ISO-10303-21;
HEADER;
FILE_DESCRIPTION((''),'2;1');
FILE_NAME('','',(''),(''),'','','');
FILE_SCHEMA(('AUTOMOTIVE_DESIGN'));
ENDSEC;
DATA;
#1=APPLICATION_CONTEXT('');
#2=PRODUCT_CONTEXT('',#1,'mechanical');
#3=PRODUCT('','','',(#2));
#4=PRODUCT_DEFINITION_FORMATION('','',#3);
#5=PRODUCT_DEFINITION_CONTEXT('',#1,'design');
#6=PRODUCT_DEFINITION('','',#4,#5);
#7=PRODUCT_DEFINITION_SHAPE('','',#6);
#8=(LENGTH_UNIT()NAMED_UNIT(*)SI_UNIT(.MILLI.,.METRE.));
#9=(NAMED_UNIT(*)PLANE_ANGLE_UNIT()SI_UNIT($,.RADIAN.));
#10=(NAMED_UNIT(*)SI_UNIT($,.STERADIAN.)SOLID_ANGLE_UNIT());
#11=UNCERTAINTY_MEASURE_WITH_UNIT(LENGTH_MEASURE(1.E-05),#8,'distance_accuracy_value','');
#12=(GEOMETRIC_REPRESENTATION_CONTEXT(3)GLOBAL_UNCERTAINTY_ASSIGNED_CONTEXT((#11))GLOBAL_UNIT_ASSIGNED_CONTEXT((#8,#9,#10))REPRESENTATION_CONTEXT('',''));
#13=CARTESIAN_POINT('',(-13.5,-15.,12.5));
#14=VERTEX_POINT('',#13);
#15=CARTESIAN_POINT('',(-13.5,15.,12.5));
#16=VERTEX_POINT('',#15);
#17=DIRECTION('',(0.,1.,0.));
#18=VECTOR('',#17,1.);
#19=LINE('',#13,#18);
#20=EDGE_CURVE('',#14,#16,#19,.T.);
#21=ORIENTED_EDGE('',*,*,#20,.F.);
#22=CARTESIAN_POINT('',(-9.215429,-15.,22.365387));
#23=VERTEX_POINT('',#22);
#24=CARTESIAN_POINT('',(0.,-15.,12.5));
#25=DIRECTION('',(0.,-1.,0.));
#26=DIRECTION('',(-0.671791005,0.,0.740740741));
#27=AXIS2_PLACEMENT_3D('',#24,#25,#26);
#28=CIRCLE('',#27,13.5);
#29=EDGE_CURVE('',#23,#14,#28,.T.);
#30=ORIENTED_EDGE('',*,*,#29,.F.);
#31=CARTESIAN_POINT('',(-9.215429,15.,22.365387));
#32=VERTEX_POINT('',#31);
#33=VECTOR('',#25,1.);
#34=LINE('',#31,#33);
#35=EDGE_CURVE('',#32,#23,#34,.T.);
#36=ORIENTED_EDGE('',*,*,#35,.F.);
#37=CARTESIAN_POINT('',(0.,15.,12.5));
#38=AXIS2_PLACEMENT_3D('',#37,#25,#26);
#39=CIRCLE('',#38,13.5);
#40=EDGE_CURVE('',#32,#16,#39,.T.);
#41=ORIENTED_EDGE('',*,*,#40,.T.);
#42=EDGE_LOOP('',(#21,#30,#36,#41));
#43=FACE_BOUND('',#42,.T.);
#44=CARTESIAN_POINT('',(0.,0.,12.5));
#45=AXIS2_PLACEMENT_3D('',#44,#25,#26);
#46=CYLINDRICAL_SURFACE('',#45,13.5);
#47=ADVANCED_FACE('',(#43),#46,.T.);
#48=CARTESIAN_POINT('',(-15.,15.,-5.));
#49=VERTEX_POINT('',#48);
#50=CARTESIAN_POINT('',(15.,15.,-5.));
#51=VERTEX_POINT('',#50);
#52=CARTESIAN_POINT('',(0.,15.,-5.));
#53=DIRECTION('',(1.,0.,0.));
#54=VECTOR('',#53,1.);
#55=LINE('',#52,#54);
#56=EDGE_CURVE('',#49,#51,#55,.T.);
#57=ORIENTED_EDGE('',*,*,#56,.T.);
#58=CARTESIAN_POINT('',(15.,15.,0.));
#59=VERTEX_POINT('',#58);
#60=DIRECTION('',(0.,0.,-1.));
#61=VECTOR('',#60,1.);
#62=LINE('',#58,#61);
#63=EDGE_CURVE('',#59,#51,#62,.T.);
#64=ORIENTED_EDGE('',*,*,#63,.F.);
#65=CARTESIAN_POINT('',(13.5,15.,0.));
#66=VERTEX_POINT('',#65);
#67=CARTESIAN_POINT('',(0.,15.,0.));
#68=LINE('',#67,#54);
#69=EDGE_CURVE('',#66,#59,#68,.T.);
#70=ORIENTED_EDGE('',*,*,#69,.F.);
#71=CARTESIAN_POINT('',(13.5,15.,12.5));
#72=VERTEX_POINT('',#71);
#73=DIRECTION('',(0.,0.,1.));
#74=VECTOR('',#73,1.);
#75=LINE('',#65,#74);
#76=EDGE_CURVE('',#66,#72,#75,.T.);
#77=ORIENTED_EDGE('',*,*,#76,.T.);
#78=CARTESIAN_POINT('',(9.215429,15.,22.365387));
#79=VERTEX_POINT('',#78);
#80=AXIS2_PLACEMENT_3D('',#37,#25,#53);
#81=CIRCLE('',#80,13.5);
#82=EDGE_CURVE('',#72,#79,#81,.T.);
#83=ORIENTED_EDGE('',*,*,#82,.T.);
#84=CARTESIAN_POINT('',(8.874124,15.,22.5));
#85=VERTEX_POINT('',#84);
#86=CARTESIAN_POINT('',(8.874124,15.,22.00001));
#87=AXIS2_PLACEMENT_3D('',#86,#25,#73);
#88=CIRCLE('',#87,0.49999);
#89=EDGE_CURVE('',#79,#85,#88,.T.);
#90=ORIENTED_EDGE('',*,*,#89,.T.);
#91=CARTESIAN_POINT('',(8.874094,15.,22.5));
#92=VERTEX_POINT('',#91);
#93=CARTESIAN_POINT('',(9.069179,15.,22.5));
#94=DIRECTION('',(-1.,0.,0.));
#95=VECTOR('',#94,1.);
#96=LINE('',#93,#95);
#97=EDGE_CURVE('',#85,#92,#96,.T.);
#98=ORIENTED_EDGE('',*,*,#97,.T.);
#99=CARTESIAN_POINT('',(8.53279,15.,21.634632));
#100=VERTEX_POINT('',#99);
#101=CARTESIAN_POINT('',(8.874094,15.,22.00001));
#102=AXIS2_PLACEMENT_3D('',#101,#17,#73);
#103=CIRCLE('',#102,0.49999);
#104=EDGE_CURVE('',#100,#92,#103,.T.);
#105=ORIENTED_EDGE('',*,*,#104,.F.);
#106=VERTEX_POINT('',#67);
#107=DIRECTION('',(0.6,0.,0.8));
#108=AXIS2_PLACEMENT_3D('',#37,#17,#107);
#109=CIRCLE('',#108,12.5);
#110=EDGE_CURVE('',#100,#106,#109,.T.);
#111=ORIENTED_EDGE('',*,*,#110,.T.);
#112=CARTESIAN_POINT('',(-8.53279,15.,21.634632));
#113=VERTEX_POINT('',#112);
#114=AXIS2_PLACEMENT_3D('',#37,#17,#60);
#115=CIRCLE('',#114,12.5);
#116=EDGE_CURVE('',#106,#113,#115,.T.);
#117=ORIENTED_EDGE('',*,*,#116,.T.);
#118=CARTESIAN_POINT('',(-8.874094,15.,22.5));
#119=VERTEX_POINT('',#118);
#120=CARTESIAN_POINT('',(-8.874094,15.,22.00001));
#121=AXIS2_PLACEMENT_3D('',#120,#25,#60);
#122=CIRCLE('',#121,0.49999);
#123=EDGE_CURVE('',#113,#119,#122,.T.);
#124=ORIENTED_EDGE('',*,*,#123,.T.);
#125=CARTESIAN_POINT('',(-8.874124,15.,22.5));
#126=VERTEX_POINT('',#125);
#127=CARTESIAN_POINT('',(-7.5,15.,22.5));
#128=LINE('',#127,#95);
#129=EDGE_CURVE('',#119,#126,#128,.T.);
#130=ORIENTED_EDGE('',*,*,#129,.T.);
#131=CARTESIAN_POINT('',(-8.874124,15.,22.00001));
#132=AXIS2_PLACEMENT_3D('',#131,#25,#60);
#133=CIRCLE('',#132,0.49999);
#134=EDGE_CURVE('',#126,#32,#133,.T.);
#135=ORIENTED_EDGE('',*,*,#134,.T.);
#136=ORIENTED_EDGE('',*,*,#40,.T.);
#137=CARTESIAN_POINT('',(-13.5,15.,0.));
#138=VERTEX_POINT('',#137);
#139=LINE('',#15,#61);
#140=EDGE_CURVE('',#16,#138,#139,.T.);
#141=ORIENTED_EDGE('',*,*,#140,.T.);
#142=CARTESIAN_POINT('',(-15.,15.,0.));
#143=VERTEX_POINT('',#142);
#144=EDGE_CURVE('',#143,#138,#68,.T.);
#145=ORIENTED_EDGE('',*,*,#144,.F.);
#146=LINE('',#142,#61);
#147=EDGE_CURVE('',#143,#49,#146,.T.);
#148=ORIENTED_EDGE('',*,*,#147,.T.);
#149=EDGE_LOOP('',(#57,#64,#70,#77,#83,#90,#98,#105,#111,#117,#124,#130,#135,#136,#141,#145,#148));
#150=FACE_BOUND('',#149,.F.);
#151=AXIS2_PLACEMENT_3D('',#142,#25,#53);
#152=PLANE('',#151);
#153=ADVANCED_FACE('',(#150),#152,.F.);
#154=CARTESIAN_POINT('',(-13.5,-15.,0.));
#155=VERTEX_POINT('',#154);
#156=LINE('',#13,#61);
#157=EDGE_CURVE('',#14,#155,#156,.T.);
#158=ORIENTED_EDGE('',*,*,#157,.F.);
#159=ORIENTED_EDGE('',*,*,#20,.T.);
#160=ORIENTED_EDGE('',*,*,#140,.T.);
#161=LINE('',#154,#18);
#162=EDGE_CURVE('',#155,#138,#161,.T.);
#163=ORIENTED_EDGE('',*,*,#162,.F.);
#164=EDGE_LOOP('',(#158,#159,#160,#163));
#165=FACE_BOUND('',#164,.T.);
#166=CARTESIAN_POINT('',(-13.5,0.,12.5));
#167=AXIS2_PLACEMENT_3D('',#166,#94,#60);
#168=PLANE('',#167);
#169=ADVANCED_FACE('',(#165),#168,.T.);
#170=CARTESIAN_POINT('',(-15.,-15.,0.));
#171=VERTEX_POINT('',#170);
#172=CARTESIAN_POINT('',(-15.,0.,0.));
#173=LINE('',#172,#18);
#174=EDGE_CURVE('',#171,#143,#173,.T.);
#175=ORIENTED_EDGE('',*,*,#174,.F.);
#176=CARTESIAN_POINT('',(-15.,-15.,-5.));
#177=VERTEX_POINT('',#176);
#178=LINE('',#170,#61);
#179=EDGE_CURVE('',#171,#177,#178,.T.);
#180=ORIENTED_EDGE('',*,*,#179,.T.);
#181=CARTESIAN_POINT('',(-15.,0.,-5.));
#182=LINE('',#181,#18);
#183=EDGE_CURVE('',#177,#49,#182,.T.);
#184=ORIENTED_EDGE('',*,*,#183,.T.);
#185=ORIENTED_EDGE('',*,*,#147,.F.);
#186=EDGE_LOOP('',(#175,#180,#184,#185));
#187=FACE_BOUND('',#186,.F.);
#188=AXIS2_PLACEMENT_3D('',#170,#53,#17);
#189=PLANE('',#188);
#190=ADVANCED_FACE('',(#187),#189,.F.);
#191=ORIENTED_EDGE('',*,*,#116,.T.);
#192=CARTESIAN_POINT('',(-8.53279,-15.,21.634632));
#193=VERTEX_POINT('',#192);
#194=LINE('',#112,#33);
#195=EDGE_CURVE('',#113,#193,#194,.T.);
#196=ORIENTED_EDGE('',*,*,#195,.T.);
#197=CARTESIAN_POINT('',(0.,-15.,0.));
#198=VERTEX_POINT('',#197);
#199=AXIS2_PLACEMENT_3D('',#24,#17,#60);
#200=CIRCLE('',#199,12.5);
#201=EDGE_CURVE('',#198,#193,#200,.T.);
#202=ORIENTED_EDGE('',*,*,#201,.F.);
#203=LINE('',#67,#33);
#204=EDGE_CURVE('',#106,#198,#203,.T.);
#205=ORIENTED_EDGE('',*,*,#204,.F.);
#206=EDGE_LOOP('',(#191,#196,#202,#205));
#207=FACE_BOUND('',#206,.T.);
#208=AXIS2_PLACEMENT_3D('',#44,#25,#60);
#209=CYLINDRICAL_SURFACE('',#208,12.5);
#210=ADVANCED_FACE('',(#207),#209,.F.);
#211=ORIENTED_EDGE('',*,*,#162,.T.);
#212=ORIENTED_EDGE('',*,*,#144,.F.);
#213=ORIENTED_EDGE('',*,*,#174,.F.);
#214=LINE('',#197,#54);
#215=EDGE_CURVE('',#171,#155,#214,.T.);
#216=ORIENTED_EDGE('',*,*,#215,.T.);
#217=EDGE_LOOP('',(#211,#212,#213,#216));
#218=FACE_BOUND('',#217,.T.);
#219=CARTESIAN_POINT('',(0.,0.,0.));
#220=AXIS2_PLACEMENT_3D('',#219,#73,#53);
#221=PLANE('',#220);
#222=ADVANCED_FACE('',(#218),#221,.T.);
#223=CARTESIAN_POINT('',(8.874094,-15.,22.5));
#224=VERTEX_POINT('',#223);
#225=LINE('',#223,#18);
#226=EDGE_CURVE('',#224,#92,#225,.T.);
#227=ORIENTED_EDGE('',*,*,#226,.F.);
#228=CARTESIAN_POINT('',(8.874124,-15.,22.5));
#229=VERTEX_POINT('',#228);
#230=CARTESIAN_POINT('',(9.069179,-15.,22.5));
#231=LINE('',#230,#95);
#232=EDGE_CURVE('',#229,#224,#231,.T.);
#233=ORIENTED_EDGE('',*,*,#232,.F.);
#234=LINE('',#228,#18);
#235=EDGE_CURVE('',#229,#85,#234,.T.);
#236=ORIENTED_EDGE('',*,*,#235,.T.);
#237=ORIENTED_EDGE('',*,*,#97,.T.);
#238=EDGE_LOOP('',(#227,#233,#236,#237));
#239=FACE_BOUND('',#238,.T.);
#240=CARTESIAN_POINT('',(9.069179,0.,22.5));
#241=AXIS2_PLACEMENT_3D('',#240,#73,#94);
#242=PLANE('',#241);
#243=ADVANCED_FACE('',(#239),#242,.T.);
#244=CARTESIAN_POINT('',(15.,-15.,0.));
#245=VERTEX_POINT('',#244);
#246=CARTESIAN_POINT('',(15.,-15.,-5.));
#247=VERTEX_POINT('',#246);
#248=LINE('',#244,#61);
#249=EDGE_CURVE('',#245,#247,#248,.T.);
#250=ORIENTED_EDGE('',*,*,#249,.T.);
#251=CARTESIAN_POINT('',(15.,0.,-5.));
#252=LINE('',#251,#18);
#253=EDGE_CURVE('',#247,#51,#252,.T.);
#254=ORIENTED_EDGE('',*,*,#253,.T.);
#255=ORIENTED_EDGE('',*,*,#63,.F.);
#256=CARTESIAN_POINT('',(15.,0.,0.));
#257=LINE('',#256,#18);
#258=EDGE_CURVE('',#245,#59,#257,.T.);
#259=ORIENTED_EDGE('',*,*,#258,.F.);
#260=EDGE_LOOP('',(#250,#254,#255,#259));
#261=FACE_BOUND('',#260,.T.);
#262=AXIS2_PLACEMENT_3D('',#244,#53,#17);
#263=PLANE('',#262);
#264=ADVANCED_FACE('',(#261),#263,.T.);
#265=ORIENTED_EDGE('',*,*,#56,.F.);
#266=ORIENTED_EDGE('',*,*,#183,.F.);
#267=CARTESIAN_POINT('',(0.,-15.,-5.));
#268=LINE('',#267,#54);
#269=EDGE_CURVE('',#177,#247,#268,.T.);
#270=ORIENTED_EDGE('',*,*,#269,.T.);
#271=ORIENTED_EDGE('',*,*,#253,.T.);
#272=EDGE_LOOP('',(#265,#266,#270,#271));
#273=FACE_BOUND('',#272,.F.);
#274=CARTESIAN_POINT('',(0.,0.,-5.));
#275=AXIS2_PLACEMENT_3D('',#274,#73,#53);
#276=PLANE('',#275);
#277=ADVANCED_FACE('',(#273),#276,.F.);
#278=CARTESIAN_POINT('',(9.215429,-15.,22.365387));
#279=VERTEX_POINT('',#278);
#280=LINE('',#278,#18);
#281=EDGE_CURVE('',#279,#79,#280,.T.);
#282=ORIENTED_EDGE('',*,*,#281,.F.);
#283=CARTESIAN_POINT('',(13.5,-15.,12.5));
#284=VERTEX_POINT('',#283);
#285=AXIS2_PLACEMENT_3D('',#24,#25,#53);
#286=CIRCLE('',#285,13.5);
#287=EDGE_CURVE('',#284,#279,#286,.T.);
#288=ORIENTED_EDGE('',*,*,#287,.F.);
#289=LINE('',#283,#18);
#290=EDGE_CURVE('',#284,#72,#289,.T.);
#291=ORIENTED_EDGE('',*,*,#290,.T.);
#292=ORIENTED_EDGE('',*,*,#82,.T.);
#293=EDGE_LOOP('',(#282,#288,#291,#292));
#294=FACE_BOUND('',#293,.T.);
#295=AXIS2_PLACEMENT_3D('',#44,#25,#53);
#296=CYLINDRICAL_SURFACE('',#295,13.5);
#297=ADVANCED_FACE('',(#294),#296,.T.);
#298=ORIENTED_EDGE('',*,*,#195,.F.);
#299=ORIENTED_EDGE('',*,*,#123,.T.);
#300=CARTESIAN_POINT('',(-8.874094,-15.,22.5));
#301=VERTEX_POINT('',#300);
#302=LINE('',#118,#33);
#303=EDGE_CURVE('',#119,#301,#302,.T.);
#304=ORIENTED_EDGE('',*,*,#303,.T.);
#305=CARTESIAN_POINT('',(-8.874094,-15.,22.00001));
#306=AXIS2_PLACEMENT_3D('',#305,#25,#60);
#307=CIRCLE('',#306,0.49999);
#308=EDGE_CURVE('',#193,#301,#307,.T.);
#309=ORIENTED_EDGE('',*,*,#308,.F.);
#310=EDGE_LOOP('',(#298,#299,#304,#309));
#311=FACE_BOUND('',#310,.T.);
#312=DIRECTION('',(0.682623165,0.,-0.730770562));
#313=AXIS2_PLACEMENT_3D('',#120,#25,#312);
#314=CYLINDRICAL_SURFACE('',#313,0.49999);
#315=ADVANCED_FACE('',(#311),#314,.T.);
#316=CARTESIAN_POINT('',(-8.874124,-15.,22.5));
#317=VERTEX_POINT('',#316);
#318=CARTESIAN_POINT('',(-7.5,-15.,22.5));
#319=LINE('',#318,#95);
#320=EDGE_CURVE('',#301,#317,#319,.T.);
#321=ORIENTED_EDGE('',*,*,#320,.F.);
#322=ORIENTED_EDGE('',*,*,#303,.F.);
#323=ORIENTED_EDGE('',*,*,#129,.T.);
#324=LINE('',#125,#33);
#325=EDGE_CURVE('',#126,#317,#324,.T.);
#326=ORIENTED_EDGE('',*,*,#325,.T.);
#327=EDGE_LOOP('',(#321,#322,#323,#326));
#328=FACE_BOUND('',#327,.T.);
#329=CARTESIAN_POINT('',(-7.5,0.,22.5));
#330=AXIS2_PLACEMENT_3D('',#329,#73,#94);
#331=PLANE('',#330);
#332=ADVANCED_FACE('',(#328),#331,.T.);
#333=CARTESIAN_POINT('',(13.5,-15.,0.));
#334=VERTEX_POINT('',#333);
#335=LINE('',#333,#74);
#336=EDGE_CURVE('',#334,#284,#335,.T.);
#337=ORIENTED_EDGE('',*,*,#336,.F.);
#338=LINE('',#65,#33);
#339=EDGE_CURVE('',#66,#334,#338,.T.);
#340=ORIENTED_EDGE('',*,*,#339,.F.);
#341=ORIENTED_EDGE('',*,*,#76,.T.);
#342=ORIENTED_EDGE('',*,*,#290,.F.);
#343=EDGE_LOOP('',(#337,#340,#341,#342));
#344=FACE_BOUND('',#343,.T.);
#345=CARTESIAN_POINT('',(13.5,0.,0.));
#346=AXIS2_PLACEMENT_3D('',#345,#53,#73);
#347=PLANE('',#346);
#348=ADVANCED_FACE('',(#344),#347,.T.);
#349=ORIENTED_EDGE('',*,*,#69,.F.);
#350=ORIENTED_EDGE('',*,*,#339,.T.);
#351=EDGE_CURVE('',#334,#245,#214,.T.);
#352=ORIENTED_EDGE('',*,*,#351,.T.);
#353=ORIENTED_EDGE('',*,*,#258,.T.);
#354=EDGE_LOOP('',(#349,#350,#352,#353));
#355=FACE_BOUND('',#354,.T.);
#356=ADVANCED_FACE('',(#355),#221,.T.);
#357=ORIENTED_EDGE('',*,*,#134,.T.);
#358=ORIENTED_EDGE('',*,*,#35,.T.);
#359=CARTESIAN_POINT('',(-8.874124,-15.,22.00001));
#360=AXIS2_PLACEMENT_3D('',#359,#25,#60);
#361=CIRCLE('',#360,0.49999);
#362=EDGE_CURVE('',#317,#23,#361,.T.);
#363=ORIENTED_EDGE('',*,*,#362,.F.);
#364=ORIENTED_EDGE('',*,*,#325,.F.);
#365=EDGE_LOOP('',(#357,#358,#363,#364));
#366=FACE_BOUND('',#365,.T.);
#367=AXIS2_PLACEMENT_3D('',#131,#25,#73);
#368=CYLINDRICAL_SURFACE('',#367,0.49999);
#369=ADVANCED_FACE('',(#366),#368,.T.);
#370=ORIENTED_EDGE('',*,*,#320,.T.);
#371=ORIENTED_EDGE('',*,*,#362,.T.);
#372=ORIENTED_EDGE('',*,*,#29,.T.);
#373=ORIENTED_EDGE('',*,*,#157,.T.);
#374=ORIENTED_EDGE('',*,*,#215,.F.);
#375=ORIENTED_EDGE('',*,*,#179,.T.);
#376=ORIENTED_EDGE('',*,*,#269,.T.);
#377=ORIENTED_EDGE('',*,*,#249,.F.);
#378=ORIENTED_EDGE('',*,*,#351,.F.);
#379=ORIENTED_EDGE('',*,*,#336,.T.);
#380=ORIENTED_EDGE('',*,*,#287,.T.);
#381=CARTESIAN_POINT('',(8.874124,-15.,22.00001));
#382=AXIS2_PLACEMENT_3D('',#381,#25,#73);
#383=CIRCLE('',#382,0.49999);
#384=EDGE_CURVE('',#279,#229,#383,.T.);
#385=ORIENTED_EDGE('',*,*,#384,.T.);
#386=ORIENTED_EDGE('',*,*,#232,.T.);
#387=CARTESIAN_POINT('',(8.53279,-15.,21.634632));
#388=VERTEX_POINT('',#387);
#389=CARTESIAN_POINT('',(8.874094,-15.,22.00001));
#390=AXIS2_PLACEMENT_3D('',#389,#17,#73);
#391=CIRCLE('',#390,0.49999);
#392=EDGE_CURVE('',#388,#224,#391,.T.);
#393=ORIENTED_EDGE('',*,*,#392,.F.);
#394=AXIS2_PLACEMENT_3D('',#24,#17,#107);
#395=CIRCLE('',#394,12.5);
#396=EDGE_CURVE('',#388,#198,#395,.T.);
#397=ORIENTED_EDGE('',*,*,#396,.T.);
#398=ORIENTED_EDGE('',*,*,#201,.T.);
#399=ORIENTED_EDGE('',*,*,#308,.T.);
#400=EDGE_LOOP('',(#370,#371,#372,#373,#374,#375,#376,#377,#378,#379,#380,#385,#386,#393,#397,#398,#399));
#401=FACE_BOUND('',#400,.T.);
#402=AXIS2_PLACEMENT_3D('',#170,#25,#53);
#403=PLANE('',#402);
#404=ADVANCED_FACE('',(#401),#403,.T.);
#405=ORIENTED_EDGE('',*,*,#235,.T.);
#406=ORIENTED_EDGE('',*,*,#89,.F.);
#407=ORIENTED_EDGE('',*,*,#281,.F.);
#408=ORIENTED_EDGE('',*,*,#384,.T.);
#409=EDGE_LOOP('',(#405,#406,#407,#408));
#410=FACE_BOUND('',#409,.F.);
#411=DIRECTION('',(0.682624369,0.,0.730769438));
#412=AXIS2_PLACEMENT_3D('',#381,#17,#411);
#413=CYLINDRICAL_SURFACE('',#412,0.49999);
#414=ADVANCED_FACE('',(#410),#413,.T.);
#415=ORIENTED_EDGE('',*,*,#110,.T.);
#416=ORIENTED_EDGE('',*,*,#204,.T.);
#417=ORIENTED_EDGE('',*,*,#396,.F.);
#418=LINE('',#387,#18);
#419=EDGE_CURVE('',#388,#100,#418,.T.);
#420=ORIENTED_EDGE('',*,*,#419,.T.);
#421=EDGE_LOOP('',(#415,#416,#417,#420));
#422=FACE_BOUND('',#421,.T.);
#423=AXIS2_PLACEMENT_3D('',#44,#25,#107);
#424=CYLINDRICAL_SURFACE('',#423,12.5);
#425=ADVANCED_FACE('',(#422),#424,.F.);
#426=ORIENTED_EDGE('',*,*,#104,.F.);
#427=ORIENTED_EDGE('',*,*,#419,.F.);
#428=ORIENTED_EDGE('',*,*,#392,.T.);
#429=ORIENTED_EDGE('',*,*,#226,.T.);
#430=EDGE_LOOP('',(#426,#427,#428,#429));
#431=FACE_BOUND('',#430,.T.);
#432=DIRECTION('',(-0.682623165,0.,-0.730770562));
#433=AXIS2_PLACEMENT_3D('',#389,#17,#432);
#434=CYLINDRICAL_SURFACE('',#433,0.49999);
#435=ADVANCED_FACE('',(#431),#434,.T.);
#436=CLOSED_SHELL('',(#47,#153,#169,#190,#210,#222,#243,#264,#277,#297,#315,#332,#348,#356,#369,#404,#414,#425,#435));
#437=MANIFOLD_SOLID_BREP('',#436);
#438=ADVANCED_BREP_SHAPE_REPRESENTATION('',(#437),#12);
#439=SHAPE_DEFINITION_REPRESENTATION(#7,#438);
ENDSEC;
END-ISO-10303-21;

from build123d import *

# Parameters (mm, degrees)
F1_W     = 30
F1_H     = 30
F2_DEPTH = 5
F3_DEPTH = 15
F4_R     = 0.49999


# Not quite as in the source:
# - a fillet or chamfer is up to 0.001 mm smaller than in the source, because OpenCascade refuses the exact size


with BuildPart() as f2:
    # F1 (on Top) → F2 (new body)
    with BuildSketch(Plane.XY):
        Rectangle(F1_W, F1_H)
    extrude(amount=-F2_DEPTH)

    # F0 (on Front) → F3 (join, symmetric)
    with BuildSketch(Plane.XZ):
        with BuildLine():
            ThreePointArc((0, 0), (-11.8585412256, 8.5471529248), (-7.5, 22.5))
            Line((-7.5, 22.5), (-9.0691785736, 22.5))
            ThreePointArc((-9.0691785736, 22.5), (-12.3426883365, 17.9688247941), (-13.5, 12.5))
            Line((-13.5, 12.5), (-13.5, 0))
            Line((-13.5, 0), (0, 0))
        make_face()
        with BuildLine():
            ThreePointArc((7.5, 22.5), (11.8585412256, 8.5471529248), (0, 0))
            Line((0, 0), (13.5, 0))
            Line((13.5, 0), (13.5, 12.5))
            ThreePointArc((13.5, 12.5), (12.3426883365, 17.9688247941), (9.0691785736, 22.5))
            Line((9.0691785736, 22.5), (7.5, 22.5))
        make_face()
    extrude(amount=F3_DEPTH, both=True)

    # F4 (radius 0.5 in the source; OpenCascade refuses exactly that, so slightly less here)
    f4_edges = [f2.edges().sort_by_distance(p)[0] for p in [
        (-7.5, 0, 22.5),
        (9.069179, 0, 22.5),
        (-9.069179, 0, 22.5),
        (7.5, 0, 22.5),
    ]]
    fillet(f4_edges, radius=F4_R)


solid = f2.part
